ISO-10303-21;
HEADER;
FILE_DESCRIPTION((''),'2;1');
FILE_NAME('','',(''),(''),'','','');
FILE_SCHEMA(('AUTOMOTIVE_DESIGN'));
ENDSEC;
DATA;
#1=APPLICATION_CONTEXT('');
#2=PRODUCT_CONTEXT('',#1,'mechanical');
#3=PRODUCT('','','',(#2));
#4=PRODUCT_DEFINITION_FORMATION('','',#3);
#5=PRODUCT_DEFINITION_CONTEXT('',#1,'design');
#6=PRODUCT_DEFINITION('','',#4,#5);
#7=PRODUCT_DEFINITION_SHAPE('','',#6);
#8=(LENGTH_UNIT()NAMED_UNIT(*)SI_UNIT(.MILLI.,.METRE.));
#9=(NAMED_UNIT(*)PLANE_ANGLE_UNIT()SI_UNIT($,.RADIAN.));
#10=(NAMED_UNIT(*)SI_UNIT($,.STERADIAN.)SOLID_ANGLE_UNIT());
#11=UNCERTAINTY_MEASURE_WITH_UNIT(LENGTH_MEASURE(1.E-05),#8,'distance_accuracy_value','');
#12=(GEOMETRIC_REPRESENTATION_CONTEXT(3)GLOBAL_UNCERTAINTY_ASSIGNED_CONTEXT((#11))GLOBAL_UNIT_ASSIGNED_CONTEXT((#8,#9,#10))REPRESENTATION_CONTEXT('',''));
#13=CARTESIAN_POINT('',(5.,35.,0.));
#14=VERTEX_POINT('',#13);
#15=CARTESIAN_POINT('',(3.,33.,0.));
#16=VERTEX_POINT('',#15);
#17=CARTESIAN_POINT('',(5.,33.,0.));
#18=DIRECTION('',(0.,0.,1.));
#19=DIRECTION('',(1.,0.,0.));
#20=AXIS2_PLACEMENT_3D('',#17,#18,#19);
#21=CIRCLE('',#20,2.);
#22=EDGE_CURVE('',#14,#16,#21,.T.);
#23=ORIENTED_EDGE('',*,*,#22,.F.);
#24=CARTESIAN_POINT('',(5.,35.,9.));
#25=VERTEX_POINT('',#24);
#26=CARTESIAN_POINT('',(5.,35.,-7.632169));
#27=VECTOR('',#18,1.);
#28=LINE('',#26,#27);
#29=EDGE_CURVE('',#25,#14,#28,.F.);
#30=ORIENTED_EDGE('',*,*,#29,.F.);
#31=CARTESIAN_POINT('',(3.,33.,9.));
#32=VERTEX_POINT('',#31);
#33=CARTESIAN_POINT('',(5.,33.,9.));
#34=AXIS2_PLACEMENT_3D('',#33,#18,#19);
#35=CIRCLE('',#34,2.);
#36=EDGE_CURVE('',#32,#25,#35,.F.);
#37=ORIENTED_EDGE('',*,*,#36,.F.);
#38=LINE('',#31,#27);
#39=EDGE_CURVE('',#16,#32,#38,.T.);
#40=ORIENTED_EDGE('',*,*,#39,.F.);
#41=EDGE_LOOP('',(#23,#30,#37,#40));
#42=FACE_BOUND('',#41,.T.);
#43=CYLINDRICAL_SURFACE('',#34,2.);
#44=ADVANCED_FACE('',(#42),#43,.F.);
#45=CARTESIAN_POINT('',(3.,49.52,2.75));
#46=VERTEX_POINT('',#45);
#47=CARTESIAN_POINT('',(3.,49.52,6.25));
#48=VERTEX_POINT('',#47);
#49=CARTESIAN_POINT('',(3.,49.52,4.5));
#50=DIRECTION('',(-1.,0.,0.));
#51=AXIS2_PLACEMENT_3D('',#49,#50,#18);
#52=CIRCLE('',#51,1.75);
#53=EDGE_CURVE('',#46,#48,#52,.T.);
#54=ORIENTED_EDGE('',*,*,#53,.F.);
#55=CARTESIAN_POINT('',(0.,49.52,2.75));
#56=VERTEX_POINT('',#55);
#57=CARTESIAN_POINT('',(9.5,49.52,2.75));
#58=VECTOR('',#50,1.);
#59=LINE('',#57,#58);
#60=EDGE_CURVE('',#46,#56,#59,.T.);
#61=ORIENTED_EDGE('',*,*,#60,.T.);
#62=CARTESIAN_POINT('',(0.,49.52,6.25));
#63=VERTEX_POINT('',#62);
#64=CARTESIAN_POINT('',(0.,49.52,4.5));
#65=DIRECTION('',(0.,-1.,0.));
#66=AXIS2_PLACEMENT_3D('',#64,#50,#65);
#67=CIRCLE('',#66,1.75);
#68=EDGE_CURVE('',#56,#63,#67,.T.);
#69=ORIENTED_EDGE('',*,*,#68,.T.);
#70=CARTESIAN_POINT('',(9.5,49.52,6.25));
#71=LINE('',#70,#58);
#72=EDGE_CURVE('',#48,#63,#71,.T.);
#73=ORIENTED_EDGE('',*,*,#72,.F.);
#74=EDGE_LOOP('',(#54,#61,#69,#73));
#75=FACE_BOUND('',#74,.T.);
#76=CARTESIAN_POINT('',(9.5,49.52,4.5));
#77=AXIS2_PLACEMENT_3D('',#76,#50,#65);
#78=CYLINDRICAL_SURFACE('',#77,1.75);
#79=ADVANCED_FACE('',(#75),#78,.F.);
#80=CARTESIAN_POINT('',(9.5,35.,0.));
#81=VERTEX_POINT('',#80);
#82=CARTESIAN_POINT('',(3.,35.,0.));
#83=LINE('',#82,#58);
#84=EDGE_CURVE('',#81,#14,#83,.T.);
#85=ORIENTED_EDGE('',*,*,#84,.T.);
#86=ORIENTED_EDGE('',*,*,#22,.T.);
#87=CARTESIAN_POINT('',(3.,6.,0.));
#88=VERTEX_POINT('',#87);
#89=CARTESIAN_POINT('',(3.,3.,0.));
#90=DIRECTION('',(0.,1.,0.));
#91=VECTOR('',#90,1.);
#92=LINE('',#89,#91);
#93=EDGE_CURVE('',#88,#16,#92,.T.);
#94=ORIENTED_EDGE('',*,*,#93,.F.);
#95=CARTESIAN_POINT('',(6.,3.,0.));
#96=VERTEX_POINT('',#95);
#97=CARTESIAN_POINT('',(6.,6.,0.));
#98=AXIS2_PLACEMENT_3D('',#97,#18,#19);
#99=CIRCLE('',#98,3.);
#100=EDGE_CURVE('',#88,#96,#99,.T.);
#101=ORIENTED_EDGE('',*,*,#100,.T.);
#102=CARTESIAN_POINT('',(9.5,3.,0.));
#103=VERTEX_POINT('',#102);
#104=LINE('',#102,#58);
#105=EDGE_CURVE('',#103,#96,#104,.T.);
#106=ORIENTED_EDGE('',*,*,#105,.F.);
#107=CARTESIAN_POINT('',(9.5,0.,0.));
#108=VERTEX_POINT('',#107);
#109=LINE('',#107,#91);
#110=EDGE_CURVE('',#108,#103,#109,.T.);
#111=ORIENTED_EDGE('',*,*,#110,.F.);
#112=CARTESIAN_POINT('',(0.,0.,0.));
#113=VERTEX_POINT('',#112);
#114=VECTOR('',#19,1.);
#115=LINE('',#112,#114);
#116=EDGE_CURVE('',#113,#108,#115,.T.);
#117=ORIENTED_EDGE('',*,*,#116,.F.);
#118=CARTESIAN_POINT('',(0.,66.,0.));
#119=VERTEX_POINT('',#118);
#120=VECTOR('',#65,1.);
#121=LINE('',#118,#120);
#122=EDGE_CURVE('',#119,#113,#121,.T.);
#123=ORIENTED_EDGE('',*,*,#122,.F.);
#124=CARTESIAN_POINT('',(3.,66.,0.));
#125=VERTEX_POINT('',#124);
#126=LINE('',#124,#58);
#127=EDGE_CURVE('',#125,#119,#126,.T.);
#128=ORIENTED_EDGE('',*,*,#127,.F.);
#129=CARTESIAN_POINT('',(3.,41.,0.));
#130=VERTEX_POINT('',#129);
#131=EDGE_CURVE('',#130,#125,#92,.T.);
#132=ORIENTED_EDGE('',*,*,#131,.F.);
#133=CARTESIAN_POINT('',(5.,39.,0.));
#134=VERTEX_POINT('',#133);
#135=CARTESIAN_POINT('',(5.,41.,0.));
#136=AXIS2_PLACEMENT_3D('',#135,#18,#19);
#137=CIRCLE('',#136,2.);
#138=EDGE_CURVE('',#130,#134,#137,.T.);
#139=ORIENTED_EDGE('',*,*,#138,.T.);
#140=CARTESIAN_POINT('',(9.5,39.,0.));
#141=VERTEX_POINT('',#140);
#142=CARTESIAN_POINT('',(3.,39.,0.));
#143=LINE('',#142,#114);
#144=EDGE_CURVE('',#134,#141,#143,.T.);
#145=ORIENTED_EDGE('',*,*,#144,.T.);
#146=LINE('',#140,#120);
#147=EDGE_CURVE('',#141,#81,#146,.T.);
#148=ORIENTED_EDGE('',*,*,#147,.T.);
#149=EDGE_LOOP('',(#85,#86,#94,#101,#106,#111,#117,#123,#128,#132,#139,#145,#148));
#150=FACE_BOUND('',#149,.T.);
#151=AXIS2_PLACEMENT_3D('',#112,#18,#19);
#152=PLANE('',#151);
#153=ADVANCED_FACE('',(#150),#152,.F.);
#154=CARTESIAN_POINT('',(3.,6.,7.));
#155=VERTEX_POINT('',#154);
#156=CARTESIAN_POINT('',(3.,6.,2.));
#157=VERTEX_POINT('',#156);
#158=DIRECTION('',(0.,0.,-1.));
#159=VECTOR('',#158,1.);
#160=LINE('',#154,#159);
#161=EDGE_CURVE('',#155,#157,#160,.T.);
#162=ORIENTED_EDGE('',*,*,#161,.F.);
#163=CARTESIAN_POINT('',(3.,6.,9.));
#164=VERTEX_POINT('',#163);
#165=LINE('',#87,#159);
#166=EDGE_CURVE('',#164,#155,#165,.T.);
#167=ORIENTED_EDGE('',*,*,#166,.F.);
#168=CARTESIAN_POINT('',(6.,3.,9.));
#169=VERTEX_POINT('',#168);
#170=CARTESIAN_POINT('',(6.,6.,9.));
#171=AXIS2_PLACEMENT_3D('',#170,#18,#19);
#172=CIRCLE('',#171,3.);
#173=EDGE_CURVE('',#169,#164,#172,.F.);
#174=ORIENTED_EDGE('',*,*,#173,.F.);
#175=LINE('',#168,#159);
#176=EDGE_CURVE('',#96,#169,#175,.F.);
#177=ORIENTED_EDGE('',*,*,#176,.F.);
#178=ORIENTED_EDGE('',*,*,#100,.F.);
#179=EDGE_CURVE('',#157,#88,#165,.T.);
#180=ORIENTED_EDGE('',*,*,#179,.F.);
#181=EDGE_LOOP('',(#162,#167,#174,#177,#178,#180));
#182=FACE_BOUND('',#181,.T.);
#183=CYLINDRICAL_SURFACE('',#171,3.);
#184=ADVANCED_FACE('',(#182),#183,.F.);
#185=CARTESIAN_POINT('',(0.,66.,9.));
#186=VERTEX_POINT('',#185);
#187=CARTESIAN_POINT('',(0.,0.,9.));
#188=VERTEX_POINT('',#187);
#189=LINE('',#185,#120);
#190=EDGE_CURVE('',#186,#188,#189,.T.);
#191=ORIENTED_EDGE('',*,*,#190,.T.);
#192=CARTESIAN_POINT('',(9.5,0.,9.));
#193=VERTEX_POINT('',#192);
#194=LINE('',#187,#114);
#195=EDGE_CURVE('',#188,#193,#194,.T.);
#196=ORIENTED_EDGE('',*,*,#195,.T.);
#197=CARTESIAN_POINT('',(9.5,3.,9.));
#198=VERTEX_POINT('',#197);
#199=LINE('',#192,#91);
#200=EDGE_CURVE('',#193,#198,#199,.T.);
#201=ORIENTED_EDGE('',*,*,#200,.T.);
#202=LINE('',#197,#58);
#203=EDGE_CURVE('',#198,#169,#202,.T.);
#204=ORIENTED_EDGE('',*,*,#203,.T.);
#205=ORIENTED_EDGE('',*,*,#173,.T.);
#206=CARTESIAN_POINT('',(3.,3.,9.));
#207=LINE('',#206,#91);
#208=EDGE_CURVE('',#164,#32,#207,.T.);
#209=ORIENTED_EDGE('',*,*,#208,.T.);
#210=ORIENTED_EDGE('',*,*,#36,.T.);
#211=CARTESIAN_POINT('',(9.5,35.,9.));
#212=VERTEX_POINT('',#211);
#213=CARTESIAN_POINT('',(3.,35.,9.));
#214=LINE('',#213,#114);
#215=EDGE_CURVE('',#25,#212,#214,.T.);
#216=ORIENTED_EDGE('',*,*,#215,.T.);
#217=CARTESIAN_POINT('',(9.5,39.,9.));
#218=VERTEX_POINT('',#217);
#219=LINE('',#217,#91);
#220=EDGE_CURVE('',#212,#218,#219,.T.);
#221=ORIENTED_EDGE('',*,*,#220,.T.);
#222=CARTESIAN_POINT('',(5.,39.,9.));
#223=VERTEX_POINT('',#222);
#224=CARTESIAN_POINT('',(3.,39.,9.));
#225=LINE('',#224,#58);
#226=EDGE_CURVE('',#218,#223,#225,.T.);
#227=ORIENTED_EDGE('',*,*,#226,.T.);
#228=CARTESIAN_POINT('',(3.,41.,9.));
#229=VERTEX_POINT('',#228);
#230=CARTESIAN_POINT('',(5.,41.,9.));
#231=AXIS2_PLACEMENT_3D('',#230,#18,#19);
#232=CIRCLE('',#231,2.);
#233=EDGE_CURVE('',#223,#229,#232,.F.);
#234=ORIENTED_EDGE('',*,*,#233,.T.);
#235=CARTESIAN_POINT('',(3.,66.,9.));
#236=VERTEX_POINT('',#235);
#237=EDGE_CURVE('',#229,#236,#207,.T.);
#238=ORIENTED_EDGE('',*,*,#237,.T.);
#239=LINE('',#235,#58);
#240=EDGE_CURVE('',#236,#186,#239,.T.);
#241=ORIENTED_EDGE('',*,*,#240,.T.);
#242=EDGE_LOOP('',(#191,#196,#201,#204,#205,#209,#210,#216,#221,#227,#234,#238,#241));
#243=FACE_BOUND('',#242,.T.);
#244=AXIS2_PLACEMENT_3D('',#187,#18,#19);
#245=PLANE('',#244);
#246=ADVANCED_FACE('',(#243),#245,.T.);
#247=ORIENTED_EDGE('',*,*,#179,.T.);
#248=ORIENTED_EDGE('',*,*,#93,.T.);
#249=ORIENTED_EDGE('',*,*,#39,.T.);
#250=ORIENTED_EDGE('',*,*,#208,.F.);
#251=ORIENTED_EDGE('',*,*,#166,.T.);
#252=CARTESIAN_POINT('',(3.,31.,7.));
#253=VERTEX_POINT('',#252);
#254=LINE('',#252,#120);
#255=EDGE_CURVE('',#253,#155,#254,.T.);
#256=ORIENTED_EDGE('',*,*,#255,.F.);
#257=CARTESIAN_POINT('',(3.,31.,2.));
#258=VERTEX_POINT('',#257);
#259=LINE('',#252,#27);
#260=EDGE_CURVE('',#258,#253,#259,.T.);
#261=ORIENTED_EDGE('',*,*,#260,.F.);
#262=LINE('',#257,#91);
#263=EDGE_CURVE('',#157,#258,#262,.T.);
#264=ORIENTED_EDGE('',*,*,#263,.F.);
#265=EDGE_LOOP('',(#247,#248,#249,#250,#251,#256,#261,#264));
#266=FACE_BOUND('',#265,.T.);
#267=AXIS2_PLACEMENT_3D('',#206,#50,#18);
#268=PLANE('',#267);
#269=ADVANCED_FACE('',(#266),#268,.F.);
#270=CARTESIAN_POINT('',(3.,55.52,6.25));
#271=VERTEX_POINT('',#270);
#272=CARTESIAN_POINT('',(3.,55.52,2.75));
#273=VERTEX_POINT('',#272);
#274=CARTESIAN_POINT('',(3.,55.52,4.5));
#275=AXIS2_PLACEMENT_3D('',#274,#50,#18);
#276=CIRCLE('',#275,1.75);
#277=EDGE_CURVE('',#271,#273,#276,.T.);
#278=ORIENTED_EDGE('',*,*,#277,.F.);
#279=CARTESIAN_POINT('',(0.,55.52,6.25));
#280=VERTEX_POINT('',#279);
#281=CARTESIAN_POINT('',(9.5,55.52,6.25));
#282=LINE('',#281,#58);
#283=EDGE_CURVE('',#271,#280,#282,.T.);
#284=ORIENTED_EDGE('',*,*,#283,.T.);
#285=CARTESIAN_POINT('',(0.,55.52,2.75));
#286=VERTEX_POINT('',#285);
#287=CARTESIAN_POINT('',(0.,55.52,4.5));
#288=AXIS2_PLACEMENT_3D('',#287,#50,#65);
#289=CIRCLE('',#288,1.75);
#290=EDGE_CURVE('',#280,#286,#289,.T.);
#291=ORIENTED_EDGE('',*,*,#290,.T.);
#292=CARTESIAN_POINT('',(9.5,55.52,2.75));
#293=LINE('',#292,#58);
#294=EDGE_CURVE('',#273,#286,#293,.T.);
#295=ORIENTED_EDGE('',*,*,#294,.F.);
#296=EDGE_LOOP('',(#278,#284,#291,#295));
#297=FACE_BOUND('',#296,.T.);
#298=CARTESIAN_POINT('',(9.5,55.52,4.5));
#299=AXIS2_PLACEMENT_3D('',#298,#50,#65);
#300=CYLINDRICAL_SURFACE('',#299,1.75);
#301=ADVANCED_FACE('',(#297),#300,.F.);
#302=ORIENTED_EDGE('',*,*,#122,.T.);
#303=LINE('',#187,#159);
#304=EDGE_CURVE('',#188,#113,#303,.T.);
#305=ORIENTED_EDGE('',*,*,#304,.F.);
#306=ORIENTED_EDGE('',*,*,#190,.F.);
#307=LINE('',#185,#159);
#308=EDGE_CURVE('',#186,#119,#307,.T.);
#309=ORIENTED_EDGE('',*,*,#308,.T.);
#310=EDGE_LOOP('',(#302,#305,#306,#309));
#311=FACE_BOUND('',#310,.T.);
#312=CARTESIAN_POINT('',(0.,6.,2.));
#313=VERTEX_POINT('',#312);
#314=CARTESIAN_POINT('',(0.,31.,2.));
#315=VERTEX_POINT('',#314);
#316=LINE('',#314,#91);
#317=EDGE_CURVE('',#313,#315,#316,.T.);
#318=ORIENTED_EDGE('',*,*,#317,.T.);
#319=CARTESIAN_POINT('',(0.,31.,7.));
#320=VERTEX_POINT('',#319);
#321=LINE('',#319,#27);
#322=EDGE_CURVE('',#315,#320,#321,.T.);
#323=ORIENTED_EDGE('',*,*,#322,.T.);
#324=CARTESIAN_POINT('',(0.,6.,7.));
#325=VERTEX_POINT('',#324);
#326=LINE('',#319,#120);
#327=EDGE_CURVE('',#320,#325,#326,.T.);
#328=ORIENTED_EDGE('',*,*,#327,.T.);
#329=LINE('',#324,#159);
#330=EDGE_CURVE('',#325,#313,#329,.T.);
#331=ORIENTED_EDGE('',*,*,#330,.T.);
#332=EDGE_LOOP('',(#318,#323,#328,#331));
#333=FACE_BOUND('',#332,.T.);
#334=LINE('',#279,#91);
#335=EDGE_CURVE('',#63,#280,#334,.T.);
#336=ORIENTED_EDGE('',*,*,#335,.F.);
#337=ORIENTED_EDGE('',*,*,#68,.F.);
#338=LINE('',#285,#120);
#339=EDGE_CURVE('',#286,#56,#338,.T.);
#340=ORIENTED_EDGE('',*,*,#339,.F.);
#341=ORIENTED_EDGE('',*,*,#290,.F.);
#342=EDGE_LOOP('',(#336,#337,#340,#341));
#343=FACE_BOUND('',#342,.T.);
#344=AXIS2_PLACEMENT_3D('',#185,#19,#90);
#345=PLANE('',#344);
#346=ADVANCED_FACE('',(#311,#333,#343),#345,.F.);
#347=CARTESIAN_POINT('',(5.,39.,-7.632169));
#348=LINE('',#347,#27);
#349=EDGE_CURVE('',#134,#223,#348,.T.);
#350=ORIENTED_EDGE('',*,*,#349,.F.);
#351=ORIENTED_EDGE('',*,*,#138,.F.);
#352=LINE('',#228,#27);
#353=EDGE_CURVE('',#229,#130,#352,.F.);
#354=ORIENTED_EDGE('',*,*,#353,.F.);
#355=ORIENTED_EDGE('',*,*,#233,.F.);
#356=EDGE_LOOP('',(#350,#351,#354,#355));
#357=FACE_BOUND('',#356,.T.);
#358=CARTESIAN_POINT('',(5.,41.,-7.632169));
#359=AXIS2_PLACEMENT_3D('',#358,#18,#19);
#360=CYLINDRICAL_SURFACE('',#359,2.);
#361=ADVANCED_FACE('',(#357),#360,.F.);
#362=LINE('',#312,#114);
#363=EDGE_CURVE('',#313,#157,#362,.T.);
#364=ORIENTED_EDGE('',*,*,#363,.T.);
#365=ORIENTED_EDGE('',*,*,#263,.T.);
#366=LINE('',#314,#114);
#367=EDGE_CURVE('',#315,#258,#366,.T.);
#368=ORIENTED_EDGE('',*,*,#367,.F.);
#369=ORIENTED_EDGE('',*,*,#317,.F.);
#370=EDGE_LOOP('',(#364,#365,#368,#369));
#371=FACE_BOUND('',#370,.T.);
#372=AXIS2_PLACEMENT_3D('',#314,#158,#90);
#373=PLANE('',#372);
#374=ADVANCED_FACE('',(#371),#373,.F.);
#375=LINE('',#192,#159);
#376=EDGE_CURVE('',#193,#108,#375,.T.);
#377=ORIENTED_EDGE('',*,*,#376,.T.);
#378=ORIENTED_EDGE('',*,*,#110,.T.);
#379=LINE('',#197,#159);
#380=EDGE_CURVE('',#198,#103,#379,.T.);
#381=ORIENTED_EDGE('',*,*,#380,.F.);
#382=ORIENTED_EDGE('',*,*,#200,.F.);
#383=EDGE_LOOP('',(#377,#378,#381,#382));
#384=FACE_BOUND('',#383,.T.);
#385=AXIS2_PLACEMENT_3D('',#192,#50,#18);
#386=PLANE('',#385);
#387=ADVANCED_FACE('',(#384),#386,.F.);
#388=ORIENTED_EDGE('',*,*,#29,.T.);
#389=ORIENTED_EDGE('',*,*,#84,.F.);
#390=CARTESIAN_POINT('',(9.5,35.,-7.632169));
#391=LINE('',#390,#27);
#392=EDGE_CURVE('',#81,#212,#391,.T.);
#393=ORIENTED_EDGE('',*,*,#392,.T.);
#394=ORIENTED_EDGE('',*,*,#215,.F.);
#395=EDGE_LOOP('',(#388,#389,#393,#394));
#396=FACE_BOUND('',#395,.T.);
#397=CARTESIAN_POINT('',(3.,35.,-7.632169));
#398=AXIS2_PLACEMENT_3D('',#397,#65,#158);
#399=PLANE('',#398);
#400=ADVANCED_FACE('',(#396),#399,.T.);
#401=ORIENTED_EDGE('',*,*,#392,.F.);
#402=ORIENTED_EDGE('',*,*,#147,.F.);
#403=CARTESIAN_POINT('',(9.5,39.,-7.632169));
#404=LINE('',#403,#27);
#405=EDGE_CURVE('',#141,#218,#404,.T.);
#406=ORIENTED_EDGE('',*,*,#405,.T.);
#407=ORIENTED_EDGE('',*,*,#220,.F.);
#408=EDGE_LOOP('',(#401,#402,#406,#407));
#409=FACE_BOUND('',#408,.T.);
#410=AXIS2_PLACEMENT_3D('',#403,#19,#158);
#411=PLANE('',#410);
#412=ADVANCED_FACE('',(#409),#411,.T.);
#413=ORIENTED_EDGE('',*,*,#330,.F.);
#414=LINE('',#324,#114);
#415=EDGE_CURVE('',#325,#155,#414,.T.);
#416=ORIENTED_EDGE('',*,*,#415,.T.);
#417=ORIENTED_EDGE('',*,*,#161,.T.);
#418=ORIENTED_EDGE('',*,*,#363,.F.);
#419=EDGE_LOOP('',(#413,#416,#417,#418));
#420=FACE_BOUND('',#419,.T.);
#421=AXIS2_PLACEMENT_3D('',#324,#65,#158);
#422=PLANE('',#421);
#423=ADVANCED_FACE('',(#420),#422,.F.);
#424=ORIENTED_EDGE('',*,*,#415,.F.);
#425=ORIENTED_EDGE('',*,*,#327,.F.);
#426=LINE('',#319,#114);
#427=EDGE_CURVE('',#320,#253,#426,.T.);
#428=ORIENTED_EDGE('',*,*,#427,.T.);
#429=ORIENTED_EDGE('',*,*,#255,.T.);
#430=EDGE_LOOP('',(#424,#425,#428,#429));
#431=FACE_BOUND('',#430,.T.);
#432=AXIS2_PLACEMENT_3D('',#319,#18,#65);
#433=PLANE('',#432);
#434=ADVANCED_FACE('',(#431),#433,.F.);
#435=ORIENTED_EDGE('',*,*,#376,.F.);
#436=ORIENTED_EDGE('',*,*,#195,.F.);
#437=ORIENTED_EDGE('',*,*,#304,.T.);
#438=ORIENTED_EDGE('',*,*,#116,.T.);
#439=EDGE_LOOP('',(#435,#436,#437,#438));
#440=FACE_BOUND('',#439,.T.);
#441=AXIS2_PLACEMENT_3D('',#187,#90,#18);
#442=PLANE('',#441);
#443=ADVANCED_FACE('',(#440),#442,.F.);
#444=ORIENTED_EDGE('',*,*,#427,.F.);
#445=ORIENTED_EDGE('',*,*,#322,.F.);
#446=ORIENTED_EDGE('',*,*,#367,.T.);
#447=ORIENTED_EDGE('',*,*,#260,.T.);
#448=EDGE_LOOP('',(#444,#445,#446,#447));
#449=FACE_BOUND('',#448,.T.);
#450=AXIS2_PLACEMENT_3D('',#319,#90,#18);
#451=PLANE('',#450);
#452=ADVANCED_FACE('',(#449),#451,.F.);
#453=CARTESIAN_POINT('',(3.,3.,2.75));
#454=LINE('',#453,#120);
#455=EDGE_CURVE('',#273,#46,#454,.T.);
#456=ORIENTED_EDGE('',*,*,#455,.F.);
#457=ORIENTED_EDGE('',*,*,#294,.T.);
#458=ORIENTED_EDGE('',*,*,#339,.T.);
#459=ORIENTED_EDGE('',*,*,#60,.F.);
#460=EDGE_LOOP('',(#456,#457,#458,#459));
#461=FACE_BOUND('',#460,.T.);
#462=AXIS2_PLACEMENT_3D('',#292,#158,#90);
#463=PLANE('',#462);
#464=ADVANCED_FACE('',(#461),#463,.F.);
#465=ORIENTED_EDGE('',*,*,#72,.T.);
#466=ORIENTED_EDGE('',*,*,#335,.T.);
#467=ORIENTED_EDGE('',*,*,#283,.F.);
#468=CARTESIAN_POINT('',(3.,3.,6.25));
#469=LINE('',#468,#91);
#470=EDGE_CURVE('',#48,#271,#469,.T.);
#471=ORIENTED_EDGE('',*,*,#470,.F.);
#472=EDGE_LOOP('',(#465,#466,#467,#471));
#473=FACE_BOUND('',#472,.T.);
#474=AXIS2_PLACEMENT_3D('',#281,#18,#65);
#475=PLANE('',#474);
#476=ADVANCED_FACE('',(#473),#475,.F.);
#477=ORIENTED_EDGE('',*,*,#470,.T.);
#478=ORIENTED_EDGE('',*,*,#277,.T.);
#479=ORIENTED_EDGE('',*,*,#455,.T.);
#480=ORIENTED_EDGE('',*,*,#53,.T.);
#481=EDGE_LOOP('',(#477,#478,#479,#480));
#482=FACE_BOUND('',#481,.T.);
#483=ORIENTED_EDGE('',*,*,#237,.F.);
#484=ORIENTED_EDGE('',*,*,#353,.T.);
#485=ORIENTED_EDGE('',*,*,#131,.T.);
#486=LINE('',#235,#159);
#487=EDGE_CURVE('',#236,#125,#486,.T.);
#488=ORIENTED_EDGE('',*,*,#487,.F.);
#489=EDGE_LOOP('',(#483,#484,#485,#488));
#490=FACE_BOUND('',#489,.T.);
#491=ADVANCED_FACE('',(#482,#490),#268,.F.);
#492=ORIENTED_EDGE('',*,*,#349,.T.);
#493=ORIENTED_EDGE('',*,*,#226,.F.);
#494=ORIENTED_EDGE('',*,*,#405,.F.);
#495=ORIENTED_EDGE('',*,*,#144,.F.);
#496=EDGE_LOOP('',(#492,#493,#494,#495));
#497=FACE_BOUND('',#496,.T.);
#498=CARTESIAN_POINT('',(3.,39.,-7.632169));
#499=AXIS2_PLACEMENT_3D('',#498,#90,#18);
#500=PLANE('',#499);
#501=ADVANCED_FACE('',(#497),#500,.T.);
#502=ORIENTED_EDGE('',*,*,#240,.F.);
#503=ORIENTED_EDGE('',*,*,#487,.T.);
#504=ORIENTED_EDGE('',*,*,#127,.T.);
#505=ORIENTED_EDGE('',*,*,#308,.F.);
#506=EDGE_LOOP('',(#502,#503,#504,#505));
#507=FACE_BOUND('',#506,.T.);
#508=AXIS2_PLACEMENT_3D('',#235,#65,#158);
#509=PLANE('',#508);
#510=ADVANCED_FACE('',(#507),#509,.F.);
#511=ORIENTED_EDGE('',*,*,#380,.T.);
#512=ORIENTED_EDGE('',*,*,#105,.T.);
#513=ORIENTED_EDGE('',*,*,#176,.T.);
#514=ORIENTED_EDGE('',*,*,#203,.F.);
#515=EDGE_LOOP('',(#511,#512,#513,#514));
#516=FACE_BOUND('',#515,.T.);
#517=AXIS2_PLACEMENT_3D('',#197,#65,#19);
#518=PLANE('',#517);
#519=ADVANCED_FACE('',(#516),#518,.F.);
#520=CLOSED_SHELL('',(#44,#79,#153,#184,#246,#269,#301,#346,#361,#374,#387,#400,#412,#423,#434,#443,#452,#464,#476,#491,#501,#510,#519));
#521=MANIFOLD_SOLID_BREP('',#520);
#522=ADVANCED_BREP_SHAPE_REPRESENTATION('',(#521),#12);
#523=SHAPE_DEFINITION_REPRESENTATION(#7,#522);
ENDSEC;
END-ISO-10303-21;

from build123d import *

# Parameters (mm, degrees)
EXTRUDE_1_DEPTH     = 9
CUT_EXTRUDE_2_DEPTH = 68.284842275
SKETCH_6_W          = 5
SKETCH_6_H          = 25
CUT_EXTRUDE_3_DEPTH = 67.927199254
FILLET_1_R          = 3
SKETCH_7_W          = 6.5
SKETCH_7_H          = 4
EXTRUDE_2_DEPTH     = 9
FILLET_2_R          = 2


with BuildPart() as part:
    # Эскиз1 → Бобышка-Вытянуть1 (new body)
    with BuildSketch(Plane.XY):
        Polygon((0, 0), (9.5, 0), (9.5, 3), (3, 3), (3, 66), (0, 66), align=None)
    extrude(amount=EXTRUDE_1_DEPTH)

    # Эскиз4 → Вырез-Вытянуть2 (cut, through all)
    with BuildSketch(Plane.ZY):
        with BuildLine():
            Line((6.25, 55.52), (6.25, 49.52))
            ThreePointArc((6.25, 49.52), (4.5, 47.77), (2.75, 49.52))
            Line((2.75, 49.52), (2.75, 55.52))
            ThreePointArc((2.75, 55.52), (4.5, 57.27), (6.25, 55.52))
        make_face()
    extrude(amount=-CUT_EXTRUDE_2_DEPTH, mode=Mode.SUBTRACT)

    # Эскиз6 → Вырез-Вытянуть3 (cut, through all)
    with BuildSketch(Plane(origin=(3, 0, 0), x_dir=(0, 0, -1), z_dir=(1, 0, 0))):
        with Locations((-4.5, 18.5)):
            Rectangle(SKETCH_6_W, SKETCH_6_H)
    extrude(amount=-CUT_EXTRUDE_3_DEPTH, mode=Mode.SUBTRACT)

    # Скругление1
    fillet_1_edges = [part.edges().sort_by_distance(p)[0] for p in [
        (3, 3, 4.5),
    ]]
    fillet(fillet_1_edges, radius=FILLET_1_R - 0.0001)  # a hair under: the kernel refuses the full size

    # Эскиз7 → Бобышка-Вытянуть2 (add)
    with BuildSketch(Plane.XY.offset(9)):
        with Locations((6.25, 37)):
            Rectangle(SKETCH_7_W, SKETCH_7_H)
    extrude(amount=-EXTRUDE_2_DEPTH)

    # Скругление2
    fillet_2_edges = [part.edges().sort_by_distance(p)[0] for p in [
        (3, 39, 4.5),
        (3, 35, 4.5),
    ]]
    fillet(fillet_2_edges, radius=FILLET_2_R)


solid = part.part
